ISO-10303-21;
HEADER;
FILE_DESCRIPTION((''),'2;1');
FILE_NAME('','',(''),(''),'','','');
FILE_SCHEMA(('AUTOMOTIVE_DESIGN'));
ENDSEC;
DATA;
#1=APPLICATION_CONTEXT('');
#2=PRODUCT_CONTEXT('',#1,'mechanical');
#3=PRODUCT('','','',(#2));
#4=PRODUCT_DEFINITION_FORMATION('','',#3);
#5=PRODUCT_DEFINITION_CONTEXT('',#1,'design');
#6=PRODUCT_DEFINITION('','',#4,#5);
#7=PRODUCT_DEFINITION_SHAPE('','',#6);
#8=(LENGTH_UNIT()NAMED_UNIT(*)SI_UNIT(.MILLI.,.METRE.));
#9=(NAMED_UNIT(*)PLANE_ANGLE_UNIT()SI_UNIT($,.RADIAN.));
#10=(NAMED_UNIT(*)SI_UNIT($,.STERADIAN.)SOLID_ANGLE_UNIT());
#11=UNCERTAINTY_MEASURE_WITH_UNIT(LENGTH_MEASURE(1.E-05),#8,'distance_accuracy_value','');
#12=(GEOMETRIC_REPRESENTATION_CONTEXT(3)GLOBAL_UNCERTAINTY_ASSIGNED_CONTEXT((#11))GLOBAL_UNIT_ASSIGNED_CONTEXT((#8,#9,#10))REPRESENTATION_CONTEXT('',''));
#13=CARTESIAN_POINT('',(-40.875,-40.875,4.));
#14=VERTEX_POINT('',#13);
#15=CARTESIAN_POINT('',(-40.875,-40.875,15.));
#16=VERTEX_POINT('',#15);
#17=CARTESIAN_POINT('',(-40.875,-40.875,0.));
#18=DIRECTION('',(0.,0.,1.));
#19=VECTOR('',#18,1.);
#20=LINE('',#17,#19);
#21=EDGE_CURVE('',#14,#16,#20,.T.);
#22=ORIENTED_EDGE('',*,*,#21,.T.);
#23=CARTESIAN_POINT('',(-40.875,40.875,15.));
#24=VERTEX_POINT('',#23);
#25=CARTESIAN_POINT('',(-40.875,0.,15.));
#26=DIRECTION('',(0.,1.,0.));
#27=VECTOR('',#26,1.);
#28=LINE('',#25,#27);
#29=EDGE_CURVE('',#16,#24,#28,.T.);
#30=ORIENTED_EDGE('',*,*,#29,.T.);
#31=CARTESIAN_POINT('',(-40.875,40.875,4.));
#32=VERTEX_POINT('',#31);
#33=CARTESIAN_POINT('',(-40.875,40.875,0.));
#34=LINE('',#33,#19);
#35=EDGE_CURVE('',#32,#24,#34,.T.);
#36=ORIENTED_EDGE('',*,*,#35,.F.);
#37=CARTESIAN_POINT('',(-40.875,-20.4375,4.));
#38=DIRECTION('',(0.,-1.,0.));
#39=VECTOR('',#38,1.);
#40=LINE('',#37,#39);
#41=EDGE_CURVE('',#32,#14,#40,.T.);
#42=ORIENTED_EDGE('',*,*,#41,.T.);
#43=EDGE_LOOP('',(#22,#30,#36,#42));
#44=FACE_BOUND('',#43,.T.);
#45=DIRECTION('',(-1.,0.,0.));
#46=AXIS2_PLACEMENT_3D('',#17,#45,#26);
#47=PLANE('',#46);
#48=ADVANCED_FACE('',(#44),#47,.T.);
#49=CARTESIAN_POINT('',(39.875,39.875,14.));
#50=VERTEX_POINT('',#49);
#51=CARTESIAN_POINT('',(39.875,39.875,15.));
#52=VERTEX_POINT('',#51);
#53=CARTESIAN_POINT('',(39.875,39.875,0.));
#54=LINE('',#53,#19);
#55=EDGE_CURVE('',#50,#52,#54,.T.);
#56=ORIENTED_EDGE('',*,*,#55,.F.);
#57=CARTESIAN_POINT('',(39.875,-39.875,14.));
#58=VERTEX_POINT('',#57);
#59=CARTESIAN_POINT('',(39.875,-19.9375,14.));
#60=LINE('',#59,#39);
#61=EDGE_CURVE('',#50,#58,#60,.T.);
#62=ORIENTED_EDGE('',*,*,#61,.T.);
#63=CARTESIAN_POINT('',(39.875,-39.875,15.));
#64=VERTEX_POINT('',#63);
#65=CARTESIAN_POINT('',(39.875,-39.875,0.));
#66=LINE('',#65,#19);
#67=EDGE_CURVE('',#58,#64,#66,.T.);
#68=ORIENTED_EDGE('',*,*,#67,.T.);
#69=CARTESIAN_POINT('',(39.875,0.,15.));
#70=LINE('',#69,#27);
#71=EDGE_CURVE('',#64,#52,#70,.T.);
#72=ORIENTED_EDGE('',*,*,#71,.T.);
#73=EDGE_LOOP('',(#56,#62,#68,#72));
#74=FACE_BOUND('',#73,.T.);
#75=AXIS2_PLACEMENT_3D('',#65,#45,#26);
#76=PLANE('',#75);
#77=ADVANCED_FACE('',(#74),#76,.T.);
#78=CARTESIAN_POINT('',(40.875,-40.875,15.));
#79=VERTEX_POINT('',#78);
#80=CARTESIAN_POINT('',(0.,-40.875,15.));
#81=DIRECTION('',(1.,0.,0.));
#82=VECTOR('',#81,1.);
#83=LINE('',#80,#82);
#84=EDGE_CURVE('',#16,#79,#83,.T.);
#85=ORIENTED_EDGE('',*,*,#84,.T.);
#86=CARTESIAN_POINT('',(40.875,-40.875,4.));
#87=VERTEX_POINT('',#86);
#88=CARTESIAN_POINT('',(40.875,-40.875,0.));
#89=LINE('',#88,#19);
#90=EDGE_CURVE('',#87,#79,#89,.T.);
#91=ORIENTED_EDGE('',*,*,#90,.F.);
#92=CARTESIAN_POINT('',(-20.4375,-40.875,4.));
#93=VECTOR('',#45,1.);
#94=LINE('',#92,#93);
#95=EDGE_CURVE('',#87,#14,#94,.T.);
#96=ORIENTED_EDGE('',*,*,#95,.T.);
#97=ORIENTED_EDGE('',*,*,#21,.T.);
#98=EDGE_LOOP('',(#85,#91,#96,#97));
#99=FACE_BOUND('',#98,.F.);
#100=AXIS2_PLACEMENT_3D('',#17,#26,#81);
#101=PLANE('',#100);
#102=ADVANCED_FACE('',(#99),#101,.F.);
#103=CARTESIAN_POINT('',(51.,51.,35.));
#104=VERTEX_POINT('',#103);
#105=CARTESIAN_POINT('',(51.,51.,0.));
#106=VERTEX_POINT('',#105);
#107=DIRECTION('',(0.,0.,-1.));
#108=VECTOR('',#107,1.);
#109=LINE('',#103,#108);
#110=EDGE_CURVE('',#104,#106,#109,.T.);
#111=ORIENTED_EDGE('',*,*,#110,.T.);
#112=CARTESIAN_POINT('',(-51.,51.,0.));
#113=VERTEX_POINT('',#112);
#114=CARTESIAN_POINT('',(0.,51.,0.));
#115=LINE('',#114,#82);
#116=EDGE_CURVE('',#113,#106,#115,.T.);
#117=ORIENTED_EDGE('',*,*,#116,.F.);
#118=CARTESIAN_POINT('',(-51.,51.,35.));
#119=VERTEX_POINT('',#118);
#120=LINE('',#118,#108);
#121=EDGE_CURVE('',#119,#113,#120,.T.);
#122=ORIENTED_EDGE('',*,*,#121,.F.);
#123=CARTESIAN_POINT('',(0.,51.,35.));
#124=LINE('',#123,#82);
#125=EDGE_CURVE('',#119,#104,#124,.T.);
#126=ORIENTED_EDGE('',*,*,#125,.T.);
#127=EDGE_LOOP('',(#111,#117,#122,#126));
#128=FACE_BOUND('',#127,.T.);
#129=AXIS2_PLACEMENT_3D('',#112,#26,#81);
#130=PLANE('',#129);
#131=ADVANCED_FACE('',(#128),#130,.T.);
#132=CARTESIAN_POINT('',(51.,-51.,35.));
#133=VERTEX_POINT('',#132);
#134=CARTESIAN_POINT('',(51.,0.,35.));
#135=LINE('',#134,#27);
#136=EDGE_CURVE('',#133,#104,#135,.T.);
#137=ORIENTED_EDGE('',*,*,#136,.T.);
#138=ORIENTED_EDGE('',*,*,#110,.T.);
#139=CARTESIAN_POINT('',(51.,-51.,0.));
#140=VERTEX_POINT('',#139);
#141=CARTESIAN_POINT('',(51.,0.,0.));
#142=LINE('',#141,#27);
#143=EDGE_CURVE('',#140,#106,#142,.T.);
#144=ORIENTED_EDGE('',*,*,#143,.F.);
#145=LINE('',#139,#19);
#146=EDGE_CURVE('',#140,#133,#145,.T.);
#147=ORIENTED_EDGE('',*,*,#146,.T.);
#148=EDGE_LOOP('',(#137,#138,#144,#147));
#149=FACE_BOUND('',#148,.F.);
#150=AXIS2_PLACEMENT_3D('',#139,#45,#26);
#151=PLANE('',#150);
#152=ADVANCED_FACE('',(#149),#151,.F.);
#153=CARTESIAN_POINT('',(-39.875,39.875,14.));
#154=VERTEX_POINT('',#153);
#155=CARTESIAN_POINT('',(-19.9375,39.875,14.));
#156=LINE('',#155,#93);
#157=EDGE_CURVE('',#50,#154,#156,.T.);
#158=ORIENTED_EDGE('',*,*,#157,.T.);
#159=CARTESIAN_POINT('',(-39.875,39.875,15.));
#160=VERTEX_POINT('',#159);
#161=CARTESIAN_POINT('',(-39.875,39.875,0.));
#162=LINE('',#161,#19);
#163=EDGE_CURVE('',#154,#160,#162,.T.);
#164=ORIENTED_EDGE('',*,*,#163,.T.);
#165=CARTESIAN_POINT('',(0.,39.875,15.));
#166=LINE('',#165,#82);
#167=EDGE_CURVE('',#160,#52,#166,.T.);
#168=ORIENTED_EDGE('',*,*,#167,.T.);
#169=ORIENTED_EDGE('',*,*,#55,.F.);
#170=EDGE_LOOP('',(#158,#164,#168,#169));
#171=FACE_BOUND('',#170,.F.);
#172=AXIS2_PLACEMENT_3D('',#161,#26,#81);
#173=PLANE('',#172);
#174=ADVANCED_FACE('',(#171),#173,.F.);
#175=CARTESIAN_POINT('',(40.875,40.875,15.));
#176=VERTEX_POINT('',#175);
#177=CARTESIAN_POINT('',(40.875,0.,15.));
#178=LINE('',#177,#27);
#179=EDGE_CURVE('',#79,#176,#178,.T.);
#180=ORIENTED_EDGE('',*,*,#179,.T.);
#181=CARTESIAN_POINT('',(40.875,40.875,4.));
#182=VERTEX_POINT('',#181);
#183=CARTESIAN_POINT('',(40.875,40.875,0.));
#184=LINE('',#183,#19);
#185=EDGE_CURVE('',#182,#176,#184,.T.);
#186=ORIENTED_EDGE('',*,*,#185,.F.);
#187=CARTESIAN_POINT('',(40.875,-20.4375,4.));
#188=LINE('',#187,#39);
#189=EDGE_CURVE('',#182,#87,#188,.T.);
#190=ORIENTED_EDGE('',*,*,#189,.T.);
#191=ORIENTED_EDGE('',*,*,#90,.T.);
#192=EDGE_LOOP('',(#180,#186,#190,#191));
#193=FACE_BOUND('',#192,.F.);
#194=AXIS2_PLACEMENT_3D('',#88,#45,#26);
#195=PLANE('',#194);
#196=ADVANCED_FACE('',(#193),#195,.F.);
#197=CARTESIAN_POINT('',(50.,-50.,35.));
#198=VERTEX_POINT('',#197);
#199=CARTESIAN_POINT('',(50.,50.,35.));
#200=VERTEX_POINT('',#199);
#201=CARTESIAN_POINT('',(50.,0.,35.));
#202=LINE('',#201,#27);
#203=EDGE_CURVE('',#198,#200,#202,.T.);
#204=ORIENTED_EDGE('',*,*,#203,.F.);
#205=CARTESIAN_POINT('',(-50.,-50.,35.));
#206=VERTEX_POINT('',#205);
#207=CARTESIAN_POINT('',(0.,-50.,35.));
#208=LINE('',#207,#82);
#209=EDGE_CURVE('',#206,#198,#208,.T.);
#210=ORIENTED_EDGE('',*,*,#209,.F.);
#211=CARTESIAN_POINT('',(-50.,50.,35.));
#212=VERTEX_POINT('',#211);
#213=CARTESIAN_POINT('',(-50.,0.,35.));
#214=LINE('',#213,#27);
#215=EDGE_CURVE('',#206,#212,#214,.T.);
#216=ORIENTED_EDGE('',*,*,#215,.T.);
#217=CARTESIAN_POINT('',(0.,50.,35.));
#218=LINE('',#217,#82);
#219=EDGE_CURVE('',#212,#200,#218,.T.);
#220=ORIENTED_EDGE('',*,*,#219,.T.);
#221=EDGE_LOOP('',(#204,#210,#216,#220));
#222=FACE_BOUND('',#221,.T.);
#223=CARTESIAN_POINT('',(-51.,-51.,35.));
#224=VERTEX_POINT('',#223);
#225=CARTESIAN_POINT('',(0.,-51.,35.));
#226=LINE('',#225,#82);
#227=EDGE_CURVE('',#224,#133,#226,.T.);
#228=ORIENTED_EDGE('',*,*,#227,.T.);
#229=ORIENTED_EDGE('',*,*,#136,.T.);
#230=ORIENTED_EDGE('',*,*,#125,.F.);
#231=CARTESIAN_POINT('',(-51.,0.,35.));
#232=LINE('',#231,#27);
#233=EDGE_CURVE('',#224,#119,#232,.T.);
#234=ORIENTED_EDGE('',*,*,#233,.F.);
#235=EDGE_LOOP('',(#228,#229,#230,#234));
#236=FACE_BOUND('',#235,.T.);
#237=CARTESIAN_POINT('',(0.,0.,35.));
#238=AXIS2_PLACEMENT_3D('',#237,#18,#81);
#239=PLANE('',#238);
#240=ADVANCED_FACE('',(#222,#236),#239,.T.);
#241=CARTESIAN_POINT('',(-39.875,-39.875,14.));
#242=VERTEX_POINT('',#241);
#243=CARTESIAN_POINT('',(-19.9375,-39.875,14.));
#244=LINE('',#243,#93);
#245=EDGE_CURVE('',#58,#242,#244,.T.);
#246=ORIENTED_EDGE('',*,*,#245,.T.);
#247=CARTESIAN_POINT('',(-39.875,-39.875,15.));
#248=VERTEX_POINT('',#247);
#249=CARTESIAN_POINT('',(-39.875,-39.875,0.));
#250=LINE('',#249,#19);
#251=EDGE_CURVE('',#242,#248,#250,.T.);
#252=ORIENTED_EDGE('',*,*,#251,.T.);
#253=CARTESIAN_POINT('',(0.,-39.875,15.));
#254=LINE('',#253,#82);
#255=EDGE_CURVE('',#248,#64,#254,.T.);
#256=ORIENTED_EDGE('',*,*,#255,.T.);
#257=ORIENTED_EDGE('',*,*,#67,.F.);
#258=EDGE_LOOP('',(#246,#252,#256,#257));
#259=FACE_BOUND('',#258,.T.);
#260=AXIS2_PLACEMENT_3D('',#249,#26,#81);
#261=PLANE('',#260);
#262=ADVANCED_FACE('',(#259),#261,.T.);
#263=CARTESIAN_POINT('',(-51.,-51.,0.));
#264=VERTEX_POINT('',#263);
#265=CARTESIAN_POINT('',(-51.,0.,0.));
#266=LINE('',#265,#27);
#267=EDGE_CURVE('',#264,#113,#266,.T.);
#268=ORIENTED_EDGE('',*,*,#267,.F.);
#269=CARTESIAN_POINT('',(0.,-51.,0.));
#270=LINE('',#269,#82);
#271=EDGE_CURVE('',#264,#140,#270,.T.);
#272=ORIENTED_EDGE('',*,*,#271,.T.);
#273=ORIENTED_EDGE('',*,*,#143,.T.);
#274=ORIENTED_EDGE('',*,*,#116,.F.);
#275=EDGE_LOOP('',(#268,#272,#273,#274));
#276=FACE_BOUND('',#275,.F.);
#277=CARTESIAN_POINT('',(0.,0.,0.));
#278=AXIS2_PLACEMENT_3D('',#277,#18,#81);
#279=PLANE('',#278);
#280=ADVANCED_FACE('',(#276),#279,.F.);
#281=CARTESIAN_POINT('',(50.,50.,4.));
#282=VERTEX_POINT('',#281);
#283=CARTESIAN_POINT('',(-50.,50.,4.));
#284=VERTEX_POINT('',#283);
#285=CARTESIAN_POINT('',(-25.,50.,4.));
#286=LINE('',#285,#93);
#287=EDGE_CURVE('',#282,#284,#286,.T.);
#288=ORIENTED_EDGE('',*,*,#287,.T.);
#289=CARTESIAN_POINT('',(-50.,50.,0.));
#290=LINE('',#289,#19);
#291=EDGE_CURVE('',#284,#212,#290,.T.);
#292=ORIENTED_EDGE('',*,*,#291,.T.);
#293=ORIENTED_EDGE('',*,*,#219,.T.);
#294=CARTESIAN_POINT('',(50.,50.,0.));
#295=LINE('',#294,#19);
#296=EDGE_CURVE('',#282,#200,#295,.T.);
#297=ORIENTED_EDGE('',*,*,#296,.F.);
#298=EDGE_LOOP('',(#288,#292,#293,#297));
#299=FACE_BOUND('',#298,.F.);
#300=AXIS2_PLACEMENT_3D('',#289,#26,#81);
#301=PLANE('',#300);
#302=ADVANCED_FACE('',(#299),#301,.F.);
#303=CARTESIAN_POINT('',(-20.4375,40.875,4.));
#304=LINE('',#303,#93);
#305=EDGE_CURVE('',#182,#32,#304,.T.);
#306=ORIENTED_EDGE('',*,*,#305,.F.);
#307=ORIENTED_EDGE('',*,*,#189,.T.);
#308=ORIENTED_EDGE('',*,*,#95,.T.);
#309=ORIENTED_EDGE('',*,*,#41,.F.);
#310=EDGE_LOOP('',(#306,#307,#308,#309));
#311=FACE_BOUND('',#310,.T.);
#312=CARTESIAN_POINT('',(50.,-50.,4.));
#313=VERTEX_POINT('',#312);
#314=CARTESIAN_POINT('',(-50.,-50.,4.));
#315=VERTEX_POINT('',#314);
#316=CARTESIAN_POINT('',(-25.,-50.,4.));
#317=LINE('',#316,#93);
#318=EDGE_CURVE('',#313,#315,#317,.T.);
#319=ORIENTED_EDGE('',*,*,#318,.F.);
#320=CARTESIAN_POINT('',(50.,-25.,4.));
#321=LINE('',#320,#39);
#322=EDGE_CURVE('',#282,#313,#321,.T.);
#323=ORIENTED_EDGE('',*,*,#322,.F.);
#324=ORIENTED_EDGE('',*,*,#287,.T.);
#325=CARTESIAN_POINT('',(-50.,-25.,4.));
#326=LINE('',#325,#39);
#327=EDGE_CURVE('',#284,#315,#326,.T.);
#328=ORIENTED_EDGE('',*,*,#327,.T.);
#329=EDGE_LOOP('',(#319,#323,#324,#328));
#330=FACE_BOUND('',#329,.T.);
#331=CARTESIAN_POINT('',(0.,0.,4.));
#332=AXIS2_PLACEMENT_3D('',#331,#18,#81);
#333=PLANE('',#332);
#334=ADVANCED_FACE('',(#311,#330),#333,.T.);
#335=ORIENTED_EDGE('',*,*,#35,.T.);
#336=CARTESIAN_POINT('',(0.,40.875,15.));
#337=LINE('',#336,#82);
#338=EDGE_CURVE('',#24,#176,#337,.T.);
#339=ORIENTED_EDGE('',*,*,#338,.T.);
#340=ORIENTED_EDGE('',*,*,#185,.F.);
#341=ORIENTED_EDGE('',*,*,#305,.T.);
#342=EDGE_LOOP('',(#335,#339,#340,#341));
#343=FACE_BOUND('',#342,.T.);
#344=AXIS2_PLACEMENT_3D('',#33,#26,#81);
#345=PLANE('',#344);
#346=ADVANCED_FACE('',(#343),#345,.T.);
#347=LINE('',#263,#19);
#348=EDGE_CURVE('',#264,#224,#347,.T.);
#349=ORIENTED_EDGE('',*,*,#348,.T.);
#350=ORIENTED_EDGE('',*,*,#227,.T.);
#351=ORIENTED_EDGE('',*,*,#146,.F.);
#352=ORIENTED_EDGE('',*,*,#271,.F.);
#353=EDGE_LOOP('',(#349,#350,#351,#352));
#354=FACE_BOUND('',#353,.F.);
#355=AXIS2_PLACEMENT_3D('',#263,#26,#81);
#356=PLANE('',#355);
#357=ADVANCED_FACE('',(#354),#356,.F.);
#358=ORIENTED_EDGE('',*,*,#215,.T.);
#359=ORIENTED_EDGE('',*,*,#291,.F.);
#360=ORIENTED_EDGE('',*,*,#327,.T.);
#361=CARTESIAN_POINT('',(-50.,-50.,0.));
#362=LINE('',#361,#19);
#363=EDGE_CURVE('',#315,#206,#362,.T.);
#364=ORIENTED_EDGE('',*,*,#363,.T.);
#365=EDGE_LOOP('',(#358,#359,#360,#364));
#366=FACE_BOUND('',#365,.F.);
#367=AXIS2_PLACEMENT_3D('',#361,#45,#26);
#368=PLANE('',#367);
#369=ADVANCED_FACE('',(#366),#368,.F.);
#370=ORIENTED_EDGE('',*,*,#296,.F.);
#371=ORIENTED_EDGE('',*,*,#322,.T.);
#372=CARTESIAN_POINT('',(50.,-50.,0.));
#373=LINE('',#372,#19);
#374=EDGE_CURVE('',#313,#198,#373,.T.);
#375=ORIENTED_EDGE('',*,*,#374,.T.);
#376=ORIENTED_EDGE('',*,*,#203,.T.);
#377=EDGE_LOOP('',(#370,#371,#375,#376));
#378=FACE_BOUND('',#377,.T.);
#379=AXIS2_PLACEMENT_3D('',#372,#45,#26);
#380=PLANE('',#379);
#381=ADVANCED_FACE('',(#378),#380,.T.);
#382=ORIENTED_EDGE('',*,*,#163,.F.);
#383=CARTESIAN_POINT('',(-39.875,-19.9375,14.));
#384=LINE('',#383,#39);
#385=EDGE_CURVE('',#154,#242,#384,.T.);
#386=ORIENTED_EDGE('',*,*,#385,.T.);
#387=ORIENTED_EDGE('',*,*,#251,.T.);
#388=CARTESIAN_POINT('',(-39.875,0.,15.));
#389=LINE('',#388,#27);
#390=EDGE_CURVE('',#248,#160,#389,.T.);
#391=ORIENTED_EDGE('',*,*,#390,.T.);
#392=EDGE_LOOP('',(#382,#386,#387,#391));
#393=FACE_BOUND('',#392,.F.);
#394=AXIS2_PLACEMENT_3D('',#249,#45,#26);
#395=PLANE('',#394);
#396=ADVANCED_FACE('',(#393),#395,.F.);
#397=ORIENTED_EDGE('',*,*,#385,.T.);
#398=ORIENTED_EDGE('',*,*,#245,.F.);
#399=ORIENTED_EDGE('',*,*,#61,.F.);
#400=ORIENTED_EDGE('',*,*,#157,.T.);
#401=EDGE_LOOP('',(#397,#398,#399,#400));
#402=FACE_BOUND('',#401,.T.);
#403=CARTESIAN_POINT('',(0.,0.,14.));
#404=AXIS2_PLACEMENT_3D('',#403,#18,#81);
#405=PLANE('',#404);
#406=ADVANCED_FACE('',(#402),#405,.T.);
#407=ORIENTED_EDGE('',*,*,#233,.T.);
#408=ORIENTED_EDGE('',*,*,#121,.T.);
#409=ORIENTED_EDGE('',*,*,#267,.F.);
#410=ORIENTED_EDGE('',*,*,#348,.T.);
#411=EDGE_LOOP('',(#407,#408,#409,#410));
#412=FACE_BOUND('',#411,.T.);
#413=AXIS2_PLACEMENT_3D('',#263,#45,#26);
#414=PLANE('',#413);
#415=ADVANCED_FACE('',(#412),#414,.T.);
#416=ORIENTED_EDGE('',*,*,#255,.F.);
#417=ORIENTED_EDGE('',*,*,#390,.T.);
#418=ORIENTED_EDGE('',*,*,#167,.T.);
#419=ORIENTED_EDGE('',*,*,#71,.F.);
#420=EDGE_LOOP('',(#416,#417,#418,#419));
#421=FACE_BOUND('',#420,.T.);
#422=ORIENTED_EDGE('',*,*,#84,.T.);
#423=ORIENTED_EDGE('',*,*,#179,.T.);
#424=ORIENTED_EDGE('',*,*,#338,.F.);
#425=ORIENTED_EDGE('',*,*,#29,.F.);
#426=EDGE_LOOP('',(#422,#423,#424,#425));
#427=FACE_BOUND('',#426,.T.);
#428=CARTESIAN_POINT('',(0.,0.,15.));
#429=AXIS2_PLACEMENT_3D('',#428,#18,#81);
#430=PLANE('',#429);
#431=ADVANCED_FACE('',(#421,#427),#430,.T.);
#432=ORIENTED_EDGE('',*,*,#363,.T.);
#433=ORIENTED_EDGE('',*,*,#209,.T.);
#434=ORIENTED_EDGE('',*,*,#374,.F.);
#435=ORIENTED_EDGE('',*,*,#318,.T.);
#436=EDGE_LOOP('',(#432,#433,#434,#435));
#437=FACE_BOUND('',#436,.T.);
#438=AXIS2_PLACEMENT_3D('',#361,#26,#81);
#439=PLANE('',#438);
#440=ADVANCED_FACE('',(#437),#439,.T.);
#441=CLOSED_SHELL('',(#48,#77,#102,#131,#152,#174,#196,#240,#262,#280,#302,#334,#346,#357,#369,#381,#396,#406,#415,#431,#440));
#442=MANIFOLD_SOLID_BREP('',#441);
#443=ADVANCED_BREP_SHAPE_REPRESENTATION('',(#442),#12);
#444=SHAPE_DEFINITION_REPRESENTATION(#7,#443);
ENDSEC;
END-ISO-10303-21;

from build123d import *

# Parameters (mm, degrees)
F0_W     = 102
F0_H     = 102
F1_DEPTH = 4
F2_W     = 102
F2_H     = 102
F2_W_2   = 100
F2_H_2   = 100
F3_DEPTH = 35
F4_W     = 81.75
F4_H     = 81.75
F4_W_2   = 79.75
F4_H_2   = 79.75
F5_DEPTH = 15
F7_DEPTH = 10


# Not quite as in the source:
# - a feature names something its author has since deleted; it is built from what else it names


with BuildPart() as f1:
    # F0 (on Top) → F1 (new body)
    with BuildSketch(Plane.XY):
        Rectangle(F0_W, F0_H)
    extrude(amount=F1_DEPTH)

    # F2 (on Top) → F3 (join)
    with BuildSketch(Plane.XY):
        Rectangle(F2_W, F2_H)
        Rectangle(F2_W_2, F2_H_2, mode=Mode.SUBTRACT)
    extrude(amount=F3_DEPTH)

    # F4 (on Top) → F5 (join)
    with BuildSketch(Plane.XY):
        Rectangle(F4_W, F4_H)
        Rectangle(F4_W_2, F4_H_2, mode=Mode.SUBTRACT)
    extrude(amount=F5_DEPTH)

    # F6: union 

    # F7 (add): a face of the model
    f7_faces = [f1.faces().sort_by_distance(p)[0] for p in [
        (0, 0, 4),
    ]]
    extrude(f7_faces, amount=F7_DEPTH)


solid = f1.part
